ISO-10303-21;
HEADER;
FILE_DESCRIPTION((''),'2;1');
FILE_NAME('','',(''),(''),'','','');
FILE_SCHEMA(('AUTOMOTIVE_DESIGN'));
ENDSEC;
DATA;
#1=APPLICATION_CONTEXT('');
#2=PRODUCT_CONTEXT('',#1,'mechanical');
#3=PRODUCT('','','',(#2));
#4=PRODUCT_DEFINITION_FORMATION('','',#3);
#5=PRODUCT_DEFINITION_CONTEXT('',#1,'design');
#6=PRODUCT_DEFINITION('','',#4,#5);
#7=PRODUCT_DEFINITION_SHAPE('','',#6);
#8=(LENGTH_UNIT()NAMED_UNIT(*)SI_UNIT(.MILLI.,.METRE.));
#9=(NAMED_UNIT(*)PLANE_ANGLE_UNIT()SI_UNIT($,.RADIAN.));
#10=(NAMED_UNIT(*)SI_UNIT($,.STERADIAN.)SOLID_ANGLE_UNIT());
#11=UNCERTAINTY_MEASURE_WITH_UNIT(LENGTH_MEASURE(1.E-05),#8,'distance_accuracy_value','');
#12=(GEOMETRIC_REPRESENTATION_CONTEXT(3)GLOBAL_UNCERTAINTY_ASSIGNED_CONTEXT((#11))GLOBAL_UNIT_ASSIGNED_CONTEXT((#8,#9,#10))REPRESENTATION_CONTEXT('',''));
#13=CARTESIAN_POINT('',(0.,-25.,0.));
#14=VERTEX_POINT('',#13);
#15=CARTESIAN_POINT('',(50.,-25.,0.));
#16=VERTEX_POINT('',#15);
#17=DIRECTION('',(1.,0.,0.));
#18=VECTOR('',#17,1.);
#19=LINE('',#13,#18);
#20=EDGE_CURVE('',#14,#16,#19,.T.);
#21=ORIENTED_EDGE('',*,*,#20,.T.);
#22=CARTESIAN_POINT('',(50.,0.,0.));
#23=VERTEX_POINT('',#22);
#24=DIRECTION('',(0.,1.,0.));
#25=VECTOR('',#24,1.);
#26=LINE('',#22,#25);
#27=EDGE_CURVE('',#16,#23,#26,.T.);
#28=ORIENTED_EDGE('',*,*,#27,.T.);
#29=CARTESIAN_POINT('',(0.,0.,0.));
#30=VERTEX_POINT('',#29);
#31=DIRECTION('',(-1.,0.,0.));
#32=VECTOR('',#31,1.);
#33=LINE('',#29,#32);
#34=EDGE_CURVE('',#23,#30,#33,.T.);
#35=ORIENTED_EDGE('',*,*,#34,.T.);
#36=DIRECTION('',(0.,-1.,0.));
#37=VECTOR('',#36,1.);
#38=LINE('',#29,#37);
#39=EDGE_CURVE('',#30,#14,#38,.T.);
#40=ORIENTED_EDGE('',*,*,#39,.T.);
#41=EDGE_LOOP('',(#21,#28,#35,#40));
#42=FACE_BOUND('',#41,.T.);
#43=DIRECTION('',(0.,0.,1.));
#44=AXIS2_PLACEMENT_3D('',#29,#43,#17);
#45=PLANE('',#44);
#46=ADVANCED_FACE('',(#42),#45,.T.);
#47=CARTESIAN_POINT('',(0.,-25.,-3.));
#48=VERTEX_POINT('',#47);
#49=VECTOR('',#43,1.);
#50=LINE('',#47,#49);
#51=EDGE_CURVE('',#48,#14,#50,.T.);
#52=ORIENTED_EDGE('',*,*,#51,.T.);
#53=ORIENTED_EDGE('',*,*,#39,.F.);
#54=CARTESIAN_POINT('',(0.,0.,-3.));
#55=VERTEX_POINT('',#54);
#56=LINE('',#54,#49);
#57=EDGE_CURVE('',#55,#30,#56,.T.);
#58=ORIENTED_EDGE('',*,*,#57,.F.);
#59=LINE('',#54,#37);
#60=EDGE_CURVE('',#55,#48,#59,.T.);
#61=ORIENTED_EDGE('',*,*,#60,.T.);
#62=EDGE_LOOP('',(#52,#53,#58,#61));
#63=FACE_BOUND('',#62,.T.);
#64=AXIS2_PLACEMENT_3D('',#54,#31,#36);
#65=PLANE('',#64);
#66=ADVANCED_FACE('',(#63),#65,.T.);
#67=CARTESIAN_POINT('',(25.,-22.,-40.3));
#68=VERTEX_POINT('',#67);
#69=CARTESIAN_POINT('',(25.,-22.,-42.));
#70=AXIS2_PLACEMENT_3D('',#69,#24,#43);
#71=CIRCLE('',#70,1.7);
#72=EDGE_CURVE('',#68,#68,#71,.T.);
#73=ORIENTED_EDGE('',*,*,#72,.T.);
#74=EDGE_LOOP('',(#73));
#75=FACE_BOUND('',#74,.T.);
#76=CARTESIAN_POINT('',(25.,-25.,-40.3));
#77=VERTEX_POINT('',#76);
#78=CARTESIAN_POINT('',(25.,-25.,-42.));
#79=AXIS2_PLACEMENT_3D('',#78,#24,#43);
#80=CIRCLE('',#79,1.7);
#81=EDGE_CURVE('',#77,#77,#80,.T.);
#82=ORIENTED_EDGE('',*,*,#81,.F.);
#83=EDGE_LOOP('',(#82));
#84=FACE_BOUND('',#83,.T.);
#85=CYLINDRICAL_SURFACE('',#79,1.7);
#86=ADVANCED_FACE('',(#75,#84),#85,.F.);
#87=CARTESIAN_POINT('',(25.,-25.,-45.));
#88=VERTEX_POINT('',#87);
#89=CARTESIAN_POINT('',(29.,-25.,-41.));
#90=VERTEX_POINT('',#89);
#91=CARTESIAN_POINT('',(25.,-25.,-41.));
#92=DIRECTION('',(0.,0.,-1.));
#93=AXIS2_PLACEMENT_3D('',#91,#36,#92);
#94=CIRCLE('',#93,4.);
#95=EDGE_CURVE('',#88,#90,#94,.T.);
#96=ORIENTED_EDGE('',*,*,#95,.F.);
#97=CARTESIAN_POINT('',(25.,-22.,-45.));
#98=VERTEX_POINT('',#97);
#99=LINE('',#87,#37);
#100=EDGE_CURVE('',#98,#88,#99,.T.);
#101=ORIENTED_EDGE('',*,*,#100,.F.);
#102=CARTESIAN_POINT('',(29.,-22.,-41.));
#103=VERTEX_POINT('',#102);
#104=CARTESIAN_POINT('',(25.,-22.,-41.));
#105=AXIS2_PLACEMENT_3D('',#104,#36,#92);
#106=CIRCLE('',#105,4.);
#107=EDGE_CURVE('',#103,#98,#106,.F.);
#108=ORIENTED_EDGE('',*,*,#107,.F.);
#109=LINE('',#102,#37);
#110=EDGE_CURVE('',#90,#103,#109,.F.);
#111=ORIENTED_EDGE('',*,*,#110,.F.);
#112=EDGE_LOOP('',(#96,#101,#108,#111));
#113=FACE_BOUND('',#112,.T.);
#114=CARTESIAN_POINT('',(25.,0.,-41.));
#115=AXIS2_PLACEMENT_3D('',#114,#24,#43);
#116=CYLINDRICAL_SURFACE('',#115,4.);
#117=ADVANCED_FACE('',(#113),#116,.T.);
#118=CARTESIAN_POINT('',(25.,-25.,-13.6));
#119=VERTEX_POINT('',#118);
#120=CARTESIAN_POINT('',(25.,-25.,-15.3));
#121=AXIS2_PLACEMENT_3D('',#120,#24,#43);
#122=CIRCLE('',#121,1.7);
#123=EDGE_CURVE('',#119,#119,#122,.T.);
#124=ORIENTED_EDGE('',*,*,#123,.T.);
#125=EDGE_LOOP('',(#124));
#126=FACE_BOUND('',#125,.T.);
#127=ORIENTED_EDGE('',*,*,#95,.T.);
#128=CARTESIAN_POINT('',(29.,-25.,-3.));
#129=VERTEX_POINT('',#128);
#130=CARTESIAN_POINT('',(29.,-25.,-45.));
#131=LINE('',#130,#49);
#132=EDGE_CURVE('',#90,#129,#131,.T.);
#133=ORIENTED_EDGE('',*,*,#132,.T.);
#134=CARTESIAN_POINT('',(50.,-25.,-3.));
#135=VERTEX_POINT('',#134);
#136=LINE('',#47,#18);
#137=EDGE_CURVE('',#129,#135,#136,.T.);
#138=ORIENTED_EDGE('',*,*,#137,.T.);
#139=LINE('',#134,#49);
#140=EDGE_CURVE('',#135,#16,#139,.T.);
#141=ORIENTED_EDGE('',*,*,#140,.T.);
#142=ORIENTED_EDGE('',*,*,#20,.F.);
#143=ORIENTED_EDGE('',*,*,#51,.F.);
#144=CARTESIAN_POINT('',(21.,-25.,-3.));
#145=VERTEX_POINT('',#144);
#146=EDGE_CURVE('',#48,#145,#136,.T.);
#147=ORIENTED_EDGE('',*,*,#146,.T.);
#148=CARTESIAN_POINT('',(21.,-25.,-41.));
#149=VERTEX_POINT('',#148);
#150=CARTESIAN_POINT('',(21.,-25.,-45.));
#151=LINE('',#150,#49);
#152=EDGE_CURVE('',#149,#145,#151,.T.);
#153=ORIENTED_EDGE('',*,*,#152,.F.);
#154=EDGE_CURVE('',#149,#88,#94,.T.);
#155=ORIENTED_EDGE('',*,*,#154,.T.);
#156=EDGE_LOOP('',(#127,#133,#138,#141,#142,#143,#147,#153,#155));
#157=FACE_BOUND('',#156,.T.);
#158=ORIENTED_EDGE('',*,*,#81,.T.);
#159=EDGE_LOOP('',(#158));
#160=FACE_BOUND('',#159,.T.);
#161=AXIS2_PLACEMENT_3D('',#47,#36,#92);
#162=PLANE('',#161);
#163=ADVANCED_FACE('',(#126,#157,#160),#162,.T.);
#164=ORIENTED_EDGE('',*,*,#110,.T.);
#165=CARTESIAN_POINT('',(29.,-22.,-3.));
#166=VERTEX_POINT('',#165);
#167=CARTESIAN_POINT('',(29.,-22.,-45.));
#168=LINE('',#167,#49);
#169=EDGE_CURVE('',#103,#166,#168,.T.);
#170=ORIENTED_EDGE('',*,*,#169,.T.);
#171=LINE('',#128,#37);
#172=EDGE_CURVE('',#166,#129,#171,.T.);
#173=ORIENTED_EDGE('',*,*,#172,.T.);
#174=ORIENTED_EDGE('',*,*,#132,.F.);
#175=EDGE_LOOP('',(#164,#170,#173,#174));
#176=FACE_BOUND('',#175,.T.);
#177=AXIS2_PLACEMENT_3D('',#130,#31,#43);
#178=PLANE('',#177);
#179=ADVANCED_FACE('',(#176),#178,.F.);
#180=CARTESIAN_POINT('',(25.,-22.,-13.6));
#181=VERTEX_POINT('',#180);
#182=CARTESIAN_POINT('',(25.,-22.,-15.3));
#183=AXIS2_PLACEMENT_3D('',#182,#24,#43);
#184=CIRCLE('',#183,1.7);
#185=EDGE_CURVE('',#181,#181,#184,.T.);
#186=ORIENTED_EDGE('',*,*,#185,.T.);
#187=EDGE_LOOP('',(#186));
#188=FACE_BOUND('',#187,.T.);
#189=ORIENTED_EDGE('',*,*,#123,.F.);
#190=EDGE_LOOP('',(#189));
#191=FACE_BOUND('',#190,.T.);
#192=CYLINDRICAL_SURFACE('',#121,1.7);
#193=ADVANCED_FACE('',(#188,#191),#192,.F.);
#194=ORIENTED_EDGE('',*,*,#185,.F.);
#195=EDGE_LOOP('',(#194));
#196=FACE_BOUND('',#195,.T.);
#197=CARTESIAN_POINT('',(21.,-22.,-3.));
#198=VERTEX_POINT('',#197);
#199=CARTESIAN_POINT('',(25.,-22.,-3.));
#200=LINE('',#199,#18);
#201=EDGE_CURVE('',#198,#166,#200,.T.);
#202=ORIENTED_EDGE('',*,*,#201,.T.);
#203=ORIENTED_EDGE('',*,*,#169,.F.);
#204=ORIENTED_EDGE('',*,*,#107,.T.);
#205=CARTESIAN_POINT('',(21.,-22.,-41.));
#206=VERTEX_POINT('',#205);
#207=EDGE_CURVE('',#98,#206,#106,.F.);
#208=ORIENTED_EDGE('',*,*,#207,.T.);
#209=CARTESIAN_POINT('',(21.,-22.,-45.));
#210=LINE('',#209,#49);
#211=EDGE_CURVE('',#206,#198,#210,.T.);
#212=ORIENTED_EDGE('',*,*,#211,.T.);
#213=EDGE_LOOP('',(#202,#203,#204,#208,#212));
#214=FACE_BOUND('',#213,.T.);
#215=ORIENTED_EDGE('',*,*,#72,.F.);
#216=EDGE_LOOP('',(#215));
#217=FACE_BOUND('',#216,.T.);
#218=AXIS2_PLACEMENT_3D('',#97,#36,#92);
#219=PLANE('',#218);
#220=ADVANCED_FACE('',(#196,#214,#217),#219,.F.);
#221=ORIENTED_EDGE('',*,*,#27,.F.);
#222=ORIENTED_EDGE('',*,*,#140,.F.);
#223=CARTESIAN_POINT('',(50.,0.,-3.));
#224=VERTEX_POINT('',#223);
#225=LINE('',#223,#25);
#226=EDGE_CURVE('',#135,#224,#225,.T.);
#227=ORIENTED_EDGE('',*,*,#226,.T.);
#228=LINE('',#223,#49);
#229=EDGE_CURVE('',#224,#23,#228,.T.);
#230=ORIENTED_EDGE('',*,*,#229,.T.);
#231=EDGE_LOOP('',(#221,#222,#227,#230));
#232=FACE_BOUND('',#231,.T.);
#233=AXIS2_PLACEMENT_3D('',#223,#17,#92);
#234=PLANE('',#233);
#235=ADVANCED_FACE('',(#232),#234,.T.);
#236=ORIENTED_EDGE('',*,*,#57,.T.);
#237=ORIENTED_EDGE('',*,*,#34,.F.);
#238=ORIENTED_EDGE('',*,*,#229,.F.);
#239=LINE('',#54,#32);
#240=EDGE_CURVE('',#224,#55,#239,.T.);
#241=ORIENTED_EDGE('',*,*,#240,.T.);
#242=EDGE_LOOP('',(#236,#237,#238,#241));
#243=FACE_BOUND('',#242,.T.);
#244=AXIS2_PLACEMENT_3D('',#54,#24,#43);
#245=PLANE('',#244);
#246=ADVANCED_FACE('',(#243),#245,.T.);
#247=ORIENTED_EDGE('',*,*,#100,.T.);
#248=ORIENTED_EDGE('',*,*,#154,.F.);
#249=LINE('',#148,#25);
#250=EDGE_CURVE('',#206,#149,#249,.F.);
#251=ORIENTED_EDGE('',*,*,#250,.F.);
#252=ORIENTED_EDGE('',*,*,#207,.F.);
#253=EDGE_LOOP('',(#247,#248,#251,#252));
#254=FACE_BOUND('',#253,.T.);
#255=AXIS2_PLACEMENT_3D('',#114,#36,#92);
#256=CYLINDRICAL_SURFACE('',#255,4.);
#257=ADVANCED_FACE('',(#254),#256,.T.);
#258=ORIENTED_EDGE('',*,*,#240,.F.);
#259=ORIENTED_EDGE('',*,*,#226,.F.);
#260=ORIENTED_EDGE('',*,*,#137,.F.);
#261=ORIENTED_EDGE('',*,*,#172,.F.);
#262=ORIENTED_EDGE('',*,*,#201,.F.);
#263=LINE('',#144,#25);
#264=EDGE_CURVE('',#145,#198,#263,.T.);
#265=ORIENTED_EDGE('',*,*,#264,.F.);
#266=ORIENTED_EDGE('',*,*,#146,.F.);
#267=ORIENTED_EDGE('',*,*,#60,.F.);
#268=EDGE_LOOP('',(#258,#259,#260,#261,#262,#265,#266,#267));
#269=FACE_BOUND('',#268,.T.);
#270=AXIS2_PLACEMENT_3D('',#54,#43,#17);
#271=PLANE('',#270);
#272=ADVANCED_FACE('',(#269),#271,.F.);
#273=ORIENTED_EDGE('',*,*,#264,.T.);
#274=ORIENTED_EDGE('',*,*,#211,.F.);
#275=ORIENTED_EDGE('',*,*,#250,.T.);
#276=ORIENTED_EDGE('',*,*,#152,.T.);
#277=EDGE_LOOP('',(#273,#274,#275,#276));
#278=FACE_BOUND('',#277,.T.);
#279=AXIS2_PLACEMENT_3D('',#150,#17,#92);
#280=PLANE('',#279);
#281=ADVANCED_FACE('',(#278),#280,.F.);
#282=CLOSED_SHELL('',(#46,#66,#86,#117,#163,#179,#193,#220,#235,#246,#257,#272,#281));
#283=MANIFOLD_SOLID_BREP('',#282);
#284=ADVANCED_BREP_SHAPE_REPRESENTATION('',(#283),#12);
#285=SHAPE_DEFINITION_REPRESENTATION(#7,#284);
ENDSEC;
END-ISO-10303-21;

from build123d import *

# Parameters (mm, degrees)
SKETCH1_W           = 50
SKETCH1_H           = 25
BOSS_EXTRUDE1_DEPTH = 3
BOSS_EXTRUDE2_DEPTH = 42
SKETCH3_R           = 1.7
CUT_EXTRUDE1_DEPTH  = 71.774289117
FILLET2_R           = 4
FILLET3_R           = 4


with BuildPart() as part:
    # Sketch1 → Boss-Extrude1 (new body)
    with BuildSketch(Plane.XY):
        with Locations((25, -12.5)):
            Rectangle(SKETCH1_W, SKETCH1_H)
    extrude(amount=-BOSS_EXTRUDE1_DEPTH)

    # Sketch2 → Boss-Extrude2 (add)
    with BuildSketch(Plane(origin=(0, 0, -3), x_dir=(-1, 0, 0), z_dir=(0, 0, -1))):
        Polygon((-25, -25), (-29, -25), (-29, -22), (-25, -22), (-21, -22), (-21, -25), align=None)
    extrude(amount=BOSS_EXTRUDE2_DEPTH)

    # Sketch3 → Cut-Extrude1 (cut, through all)
    with BuildSketch(Plane(origin=(0, -22, 0), x_dir=(1, 0, 0), z_dir=(0, 1, 0))):
        with Locations(Location((25, 42, 0), (0, 0, 270))):
            Circle(SKETCH3_R)
        with Locations(Location((25, 15.3, 0), (0, 0, 270))):
            Circle(SKETCH3_R)
    extrude(amount=-CUT_EXTRUDE1_DEPTH, mode=Mode.SUBTRACT)

    # Fillet2
    fillet2_edges = [part.edges().sort_by_distance(p)[0] for p in [
        (29, -23.5, -45),
    ]]
    fillet(fillet2_edges, radius=FILLET2_R)

    # Fillet3
    fillet3_edges = [part.edges().sort_by_distance(p)[0] for p in [
        (21, -23.5, -45),
    ]]
    fillet(fillet3_edges, radius=FILLET3_R - 0.0001)  # a hair under: the kernel refuses the full size


solid = part.part
